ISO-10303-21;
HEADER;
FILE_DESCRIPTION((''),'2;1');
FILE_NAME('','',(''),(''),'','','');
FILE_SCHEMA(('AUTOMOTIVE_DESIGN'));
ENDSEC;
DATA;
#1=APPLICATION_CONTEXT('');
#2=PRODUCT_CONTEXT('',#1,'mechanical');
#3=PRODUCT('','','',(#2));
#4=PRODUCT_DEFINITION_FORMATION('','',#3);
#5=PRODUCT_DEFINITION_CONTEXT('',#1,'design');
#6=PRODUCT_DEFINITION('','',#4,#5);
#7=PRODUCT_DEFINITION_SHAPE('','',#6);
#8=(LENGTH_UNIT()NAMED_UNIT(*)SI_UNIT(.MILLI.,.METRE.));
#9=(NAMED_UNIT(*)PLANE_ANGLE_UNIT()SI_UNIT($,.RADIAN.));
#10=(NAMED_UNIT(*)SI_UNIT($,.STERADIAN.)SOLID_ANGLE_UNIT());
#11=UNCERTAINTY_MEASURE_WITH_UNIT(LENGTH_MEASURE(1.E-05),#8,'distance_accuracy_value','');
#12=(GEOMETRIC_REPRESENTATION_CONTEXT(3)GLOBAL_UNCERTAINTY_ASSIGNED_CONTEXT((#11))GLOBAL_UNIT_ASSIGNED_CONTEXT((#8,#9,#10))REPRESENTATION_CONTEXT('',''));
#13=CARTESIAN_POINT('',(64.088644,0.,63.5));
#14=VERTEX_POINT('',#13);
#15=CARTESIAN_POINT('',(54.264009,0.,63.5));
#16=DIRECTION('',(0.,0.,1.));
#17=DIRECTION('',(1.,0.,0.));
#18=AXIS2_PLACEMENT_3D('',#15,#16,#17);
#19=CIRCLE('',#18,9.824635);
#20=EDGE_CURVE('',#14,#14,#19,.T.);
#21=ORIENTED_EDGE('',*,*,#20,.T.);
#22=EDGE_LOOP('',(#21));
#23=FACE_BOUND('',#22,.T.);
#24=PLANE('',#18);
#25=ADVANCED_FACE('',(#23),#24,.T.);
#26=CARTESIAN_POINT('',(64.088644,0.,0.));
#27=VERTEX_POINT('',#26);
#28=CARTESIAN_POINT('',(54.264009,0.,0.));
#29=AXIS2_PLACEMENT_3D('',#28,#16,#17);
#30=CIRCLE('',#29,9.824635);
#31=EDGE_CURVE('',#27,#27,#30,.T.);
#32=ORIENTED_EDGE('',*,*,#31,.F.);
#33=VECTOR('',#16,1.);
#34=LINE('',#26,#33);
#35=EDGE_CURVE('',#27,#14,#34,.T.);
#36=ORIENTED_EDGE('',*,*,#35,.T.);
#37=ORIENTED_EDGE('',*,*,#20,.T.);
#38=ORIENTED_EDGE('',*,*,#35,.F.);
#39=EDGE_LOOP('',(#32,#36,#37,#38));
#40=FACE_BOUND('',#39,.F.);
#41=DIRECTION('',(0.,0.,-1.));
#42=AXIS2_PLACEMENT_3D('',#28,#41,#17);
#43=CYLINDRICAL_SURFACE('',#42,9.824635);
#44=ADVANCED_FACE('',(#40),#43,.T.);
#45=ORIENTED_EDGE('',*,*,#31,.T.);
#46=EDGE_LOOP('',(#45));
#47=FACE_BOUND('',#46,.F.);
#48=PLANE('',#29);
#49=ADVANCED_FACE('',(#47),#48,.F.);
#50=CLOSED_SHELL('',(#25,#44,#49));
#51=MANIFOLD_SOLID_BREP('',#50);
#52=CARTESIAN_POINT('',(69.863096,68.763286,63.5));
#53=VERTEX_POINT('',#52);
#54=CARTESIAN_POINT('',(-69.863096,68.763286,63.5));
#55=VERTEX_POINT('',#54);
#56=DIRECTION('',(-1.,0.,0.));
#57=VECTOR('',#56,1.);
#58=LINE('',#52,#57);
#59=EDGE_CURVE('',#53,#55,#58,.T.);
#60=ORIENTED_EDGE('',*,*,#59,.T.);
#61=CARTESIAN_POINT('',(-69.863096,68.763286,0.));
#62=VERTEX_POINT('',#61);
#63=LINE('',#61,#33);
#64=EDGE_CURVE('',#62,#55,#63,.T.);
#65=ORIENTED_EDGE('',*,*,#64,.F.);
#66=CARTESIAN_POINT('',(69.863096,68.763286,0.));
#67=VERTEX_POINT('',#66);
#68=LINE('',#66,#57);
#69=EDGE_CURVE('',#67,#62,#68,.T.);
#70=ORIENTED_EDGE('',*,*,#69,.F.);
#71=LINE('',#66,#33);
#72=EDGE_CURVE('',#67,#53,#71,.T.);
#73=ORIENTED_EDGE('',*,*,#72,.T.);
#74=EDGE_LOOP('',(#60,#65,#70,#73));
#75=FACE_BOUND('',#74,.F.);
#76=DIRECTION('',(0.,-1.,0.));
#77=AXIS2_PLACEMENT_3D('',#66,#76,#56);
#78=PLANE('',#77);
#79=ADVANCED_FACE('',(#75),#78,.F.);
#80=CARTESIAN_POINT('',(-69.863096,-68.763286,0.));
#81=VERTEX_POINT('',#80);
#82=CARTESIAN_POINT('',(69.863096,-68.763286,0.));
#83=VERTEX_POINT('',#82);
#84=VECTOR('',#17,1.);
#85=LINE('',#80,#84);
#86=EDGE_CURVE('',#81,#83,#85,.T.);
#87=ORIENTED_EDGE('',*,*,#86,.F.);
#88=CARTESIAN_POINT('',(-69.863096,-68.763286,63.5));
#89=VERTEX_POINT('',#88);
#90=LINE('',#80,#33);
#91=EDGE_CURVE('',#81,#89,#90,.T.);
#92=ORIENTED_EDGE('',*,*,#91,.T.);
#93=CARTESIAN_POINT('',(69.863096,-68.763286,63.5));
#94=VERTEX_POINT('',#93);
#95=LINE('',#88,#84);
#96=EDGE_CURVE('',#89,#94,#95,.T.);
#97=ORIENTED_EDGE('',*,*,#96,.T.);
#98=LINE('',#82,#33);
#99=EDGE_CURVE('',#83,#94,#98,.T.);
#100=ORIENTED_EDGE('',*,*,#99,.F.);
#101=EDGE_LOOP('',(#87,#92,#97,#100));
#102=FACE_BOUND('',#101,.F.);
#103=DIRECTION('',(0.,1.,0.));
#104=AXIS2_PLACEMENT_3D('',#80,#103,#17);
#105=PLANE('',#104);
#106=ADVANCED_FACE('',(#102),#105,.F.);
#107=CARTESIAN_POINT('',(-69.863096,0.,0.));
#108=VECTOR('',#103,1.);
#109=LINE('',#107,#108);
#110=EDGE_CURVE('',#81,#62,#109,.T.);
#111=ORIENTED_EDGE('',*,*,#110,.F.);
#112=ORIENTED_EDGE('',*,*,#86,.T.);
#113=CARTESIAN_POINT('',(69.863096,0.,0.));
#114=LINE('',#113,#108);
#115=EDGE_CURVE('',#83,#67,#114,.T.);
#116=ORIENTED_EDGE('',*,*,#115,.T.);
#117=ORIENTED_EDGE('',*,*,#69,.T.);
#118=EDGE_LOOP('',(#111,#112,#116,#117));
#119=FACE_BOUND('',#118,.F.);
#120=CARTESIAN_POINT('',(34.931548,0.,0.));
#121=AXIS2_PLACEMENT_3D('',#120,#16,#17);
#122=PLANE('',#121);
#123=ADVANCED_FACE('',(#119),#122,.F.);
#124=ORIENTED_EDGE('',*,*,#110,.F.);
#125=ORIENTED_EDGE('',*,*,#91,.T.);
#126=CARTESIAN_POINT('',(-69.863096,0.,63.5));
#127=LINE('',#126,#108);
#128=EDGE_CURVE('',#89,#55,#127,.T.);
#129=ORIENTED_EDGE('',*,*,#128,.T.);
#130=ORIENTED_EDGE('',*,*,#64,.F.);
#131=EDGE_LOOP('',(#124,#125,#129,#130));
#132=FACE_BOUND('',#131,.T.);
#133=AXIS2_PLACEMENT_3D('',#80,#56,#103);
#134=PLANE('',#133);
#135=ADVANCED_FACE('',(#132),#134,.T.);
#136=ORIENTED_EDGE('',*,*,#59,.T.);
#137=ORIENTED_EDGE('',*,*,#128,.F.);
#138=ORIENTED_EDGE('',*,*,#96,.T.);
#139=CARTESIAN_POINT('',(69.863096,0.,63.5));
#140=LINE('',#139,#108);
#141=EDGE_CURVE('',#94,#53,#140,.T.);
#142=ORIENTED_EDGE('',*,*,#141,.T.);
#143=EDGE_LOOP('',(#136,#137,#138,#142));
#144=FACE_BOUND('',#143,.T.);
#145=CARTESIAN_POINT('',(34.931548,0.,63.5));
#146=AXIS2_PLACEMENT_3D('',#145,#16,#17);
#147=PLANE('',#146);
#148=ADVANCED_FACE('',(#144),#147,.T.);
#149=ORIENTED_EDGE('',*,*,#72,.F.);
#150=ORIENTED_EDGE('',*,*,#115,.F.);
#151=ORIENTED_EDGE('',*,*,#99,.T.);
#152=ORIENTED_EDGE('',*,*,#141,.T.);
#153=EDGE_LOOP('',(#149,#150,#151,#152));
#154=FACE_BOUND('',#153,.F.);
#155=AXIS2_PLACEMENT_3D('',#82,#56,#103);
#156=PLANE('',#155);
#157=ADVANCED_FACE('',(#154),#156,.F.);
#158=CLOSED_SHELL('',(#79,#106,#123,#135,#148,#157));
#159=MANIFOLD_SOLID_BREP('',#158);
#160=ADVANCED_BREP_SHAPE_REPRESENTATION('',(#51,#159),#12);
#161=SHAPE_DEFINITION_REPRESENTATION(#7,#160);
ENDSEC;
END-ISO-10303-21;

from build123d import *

# Parameters (mm, degrees)
F1_R     = 9.8246353949
F2_DEPTH = 63.5
F0_W     = 69.8630958796
F0_H     = 137.5265717506


# Not quite as in the source:
# - the program builds the solid bodies; features that only make, move or delete a surface that nothing else refers to are left out


with BuildPart() as f2:
    # F1 (on Top) → F2 (new body)
    with BuildSketch(Plane.XY):
        with Locations((54.2640089989, 0)):
            Circle(F1_R)
    extrude(amount=F2_DEPTH)


with BuildPart() as f2b:
    # F0 (on Top) → F2, piece 2 (new body)
    with BuildSketch(Plane.XY):
        with Locations((34.9315479398, 0)):
            Rectangle(F0_W, F0_H)
        with Locations((-34.9315479398, 0)):
            Rectangle(F0_W, F0_H)
    extrude(amount=F2_DEPTH)


solid = Compound([f2.part, f2b.part])
